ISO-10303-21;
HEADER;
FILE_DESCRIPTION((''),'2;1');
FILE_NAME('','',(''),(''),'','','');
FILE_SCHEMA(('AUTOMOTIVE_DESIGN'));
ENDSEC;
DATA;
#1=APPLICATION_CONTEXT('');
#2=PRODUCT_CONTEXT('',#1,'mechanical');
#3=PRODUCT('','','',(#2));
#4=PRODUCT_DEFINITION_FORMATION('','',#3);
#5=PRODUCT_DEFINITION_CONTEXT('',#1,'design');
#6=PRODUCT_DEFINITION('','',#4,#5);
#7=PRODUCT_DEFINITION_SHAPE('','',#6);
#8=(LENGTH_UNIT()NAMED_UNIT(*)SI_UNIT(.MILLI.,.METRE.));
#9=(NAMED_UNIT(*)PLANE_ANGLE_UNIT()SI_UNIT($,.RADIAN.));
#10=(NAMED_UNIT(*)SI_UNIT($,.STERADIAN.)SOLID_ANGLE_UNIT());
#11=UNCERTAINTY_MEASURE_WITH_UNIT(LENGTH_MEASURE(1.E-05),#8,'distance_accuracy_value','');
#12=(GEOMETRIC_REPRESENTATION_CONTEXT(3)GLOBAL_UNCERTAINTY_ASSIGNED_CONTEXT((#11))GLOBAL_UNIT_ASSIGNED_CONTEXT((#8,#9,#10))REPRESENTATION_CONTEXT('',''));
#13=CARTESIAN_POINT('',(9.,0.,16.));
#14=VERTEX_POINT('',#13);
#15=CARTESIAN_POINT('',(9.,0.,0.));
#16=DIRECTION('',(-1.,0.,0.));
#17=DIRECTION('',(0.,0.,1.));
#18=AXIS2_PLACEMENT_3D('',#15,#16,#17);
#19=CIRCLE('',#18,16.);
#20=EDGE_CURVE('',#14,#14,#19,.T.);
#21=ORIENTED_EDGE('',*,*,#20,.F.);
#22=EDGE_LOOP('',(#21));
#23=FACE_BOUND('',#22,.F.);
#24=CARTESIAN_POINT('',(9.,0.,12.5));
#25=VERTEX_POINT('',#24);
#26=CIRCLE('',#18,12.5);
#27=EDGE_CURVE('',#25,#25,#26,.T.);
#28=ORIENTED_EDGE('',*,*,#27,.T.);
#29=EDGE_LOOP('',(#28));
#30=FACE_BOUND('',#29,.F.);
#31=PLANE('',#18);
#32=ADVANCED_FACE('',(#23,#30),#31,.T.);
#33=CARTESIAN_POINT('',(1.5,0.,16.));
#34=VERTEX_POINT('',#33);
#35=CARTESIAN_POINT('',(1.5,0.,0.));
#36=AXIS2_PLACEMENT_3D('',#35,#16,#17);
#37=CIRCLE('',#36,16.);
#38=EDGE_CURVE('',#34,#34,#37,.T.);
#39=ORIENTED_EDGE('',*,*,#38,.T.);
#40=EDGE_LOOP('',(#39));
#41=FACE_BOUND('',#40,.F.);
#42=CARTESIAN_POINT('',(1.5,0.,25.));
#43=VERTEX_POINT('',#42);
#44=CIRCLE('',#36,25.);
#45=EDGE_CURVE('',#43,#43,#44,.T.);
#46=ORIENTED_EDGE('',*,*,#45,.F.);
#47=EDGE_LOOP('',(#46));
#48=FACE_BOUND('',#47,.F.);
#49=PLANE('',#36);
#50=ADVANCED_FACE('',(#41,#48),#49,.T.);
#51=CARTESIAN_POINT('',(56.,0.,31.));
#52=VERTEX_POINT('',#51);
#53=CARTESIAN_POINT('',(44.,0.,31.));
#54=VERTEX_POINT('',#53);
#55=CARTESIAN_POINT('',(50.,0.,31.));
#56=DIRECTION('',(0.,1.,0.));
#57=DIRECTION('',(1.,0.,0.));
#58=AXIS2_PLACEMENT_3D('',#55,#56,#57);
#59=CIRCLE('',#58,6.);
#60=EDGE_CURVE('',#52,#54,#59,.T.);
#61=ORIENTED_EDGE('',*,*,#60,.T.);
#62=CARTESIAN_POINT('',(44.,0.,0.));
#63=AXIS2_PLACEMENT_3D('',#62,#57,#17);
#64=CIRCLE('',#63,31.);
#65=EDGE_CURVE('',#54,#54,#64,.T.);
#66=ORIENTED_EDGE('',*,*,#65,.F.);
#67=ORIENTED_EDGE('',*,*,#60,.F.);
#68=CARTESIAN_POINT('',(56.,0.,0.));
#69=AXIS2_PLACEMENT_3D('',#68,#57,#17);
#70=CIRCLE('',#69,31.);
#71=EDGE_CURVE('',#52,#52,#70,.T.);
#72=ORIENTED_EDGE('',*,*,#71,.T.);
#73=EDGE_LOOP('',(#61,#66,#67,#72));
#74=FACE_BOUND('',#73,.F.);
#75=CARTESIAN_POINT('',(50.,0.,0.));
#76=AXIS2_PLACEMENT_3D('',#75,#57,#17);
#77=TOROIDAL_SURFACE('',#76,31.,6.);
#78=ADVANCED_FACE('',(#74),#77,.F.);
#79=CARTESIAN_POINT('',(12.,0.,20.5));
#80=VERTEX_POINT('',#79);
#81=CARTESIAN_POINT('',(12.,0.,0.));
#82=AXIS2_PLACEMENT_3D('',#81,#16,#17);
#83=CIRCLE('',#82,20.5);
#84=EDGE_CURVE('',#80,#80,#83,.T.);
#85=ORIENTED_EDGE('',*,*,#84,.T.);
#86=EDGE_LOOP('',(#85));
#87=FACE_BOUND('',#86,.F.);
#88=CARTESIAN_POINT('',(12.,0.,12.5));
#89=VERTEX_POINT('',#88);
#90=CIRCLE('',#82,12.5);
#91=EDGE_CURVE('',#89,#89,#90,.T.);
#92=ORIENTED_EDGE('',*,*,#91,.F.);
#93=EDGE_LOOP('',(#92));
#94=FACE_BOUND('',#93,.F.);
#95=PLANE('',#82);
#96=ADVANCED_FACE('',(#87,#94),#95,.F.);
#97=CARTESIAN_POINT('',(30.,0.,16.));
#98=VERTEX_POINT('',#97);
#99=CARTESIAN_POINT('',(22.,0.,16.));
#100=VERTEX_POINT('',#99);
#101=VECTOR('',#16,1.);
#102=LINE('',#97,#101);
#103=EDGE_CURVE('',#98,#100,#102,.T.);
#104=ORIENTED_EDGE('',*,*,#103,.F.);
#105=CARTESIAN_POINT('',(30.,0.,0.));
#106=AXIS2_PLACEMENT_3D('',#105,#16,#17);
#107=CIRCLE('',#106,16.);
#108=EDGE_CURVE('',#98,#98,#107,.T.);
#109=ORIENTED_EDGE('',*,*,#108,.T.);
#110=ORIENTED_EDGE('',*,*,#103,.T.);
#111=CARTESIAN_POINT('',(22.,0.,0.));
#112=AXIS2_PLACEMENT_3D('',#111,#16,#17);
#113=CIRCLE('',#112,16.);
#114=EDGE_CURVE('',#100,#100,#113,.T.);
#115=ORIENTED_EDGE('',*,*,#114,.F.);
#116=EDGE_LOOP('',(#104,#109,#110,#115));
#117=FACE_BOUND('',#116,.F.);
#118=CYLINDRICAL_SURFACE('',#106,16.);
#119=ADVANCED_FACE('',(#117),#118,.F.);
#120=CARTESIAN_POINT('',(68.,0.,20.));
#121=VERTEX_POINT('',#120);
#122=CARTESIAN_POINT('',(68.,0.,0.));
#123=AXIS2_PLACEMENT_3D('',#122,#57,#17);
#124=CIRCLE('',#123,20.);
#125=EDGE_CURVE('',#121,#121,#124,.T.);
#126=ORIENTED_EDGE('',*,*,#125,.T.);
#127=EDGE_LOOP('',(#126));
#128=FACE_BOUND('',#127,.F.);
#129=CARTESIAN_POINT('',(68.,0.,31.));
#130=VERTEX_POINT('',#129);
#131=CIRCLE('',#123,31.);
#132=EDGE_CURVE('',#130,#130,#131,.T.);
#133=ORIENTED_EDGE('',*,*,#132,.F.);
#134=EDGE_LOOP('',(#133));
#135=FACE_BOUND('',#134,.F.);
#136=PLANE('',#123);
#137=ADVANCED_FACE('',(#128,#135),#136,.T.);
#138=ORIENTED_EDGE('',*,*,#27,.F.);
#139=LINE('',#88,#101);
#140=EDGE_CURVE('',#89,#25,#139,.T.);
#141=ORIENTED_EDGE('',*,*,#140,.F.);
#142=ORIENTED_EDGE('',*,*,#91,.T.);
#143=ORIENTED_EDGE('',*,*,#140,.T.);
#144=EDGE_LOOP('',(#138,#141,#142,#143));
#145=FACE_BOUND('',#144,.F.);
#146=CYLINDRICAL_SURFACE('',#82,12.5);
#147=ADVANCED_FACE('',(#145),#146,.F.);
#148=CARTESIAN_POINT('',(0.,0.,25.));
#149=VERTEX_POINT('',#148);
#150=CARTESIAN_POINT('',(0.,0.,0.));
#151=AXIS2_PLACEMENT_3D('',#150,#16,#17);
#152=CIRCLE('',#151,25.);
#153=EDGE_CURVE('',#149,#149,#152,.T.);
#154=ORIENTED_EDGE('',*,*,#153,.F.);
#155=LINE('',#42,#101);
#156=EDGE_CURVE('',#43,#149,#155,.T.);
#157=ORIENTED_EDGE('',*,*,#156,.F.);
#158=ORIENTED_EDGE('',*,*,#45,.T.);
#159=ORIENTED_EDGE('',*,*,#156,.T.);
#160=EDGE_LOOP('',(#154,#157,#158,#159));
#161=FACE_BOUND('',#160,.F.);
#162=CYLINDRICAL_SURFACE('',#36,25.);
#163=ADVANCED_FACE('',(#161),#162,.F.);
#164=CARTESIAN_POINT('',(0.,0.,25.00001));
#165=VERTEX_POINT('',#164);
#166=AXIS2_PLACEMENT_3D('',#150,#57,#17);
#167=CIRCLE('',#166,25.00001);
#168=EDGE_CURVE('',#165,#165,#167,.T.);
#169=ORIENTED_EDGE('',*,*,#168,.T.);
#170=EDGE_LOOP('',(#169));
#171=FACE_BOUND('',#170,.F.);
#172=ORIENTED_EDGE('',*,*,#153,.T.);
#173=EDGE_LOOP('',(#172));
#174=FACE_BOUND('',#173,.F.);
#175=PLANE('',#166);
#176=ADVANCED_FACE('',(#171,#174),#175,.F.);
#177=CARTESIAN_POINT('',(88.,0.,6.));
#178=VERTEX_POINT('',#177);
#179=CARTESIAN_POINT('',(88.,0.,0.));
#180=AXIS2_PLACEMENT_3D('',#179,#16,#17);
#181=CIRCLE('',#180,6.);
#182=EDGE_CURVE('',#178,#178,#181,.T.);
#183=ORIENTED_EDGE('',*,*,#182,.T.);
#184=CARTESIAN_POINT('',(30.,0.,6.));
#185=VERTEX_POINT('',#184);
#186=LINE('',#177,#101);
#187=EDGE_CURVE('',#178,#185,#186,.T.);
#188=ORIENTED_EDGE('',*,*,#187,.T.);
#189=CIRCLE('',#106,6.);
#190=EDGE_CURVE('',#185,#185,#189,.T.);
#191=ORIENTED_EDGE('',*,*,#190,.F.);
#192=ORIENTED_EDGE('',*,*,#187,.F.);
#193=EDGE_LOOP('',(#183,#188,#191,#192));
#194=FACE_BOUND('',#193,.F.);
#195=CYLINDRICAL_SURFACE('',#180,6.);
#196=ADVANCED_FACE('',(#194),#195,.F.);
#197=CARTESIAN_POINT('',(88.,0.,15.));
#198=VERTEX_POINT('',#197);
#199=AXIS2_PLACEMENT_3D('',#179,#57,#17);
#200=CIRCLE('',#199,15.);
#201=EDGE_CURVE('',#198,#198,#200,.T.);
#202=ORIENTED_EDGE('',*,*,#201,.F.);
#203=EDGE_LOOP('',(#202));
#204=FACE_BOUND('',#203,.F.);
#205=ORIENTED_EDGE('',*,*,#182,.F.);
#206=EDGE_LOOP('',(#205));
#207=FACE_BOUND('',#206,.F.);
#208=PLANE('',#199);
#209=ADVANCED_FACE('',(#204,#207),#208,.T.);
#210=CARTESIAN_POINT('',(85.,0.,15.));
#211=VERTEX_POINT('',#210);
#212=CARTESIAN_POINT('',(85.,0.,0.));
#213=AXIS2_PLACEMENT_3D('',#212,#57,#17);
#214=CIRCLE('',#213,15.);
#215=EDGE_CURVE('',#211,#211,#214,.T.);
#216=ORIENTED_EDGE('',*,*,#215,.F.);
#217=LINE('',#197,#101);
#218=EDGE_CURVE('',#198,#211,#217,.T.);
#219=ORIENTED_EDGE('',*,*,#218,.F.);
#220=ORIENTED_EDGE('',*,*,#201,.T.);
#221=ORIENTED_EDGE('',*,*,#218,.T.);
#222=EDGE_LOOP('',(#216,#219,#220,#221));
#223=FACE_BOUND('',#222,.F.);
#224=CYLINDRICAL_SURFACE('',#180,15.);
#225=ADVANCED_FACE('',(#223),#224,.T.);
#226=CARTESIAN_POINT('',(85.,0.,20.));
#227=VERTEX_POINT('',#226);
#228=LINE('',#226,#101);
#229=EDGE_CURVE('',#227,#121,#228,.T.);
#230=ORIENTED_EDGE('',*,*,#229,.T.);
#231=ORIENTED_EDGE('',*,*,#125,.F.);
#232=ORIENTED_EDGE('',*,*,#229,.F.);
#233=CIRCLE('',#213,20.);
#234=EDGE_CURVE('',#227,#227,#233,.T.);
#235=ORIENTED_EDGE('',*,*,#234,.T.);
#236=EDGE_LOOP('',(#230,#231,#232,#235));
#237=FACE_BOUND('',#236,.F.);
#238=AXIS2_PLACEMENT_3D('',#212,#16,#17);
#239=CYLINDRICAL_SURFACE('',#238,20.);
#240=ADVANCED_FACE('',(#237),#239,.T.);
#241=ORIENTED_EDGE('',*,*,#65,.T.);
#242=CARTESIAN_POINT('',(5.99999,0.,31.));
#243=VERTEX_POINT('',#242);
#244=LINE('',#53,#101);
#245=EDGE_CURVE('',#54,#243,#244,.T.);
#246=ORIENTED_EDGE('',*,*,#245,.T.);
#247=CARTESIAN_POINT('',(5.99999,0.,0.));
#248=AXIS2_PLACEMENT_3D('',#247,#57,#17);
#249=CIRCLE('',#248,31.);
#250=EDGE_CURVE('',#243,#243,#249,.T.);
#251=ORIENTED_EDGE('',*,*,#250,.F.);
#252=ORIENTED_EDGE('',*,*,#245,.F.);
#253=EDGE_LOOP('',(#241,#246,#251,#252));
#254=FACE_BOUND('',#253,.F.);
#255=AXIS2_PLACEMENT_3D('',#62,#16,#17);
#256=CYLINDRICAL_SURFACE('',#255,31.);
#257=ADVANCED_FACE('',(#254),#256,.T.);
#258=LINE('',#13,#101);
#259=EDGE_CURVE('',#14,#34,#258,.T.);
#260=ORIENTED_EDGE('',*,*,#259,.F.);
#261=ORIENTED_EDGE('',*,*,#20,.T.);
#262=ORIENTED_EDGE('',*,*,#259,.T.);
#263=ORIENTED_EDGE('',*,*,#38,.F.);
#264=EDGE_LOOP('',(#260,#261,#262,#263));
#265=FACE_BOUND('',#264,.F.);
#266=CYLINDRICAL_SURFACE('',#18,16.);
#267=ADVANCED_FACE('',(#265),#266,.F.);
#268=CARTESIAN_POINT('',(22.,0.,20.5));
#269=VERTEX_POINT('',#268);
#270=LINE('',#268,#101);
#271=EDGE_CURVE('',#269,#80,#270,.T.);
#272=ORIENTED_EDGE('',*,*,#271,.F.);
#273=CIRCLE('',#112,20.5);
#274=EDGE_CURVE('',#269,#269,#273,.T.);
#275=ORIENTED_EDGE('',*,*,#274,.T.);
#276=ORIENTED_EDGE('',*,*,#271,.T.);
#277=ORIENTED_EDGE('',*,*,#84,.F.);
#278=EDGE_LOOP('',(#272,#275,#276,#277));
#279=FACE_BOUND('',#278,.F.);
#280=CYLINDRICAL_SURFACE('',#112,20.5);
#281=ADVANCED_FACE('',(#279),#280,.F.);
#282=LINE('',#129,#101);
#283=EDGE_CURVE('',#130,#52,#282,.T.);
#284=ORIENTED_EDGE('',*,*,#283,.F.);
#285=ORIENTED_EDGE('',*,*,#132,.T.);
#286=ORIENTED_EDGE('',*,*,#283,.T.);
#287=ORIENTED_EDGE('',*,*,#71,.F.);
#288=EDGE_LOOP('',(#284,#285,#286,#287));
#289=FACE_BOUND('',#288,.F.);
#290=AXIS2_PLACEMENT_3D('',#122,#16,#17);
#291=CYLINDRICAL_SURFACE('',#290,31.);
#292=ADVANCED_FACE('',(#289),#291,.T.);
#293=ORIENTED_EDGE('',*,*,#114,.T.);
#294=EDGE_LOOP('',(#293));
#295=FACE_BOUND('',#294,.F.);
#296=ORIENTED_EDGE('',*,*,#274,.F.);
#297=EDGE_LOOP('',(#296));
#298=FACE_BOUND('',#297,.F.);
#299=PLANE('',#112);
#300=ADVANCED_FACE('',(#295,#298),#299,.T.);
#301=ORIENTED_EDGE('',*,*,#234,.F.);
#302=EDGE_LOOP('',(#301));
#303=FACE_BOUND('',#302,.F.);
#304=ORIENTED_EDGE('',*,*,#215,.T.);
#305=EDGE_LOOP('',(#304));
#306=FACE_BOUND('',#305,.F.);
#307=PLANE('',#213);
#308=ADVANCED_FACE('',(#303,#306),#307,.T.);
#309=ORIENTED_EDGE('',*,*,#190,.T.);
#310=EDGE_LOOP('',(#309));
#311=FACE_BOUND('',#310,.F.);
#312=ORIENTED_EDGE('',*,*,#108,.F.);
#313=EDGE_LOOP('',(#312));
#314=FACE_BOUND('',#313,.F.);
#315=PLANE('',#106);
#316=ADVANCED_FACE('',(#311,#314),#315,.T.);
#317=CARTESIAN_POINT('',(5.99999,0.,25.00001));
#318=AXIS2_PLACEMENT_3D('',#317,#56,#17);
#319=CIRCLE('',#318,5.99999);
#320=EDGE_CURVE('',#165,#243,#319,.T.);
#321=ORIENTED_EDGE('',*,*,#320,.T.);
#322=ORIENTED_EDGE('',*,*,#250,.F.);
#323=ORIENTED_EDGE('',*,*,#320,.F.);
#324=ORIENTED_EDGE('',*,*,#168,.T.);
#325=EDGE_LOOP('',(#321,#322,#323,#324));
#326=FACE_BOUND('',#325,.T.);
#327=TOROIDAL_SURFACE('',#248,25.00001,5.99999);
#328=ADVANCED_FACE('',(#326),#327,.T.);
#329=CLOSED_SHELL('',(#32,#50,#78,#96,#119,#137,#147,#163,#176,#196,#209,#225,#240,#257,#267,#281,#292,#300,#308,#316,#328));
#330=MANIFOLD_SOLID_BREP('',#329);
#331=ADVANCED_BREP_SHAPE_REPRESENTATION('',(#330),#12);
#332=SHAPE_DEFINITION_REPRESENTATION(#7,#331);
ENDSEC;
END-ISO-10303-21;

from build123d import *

# Parameters (mm, degrees)
F4_R = 5.99999


# Not quite as in the source:
# - a fillet or chamfer is up to 0.001 mm smaller than in the source, because OpenCascade refuses the exact size


with BuildPart() as f1:
    # F0 (on Front) → F1 (revolve)
    with BuildSketch(Plane.XZ):
        with BuildLine():
            Line((0, 31), (0, 0))
            Line((0, 0), (88, 0))
            Line((88, 0), (88, 15))
            Line((88, 15), (85, 15))
            Line((85, 15), (85, 20))
            Line((85, 20), (68, 20))
            Line((68, 20), (68, 31))
            Line((68, 31), (56, 31))
            ThreePointArc((56, 31), (50, 25), (44, 31))
            Line((44, 31), (0, 31))
        make_face()
    revolve(axis=Axis((63.3454471827, 0, 0), (1, 0, 0)))

    # F2 (on Front) → F3 (revolve, cut)
    with BuildSketch(Plane.XZ):
        Polygon((0, 25), (0, 0), (88, 0), (88, 6), (30, 6), (30, 16), (22, 16), (22, 20.5), (12, 20.5), (12, 12.5), (9, 12.5), (9, 16), (1.5, 16), (1.5, 25), align=None)
    revolve(axis=Axis((-10.8097042758, 0, 0), (-1, 0, 0)), mode=Mode.SUBTRACT)

    # F4 (radius 6 in the source; OpenCascade refuses exactly that, so slightly less here)
    f4_edges = [f1.edges().sort_by_distance(p)[0] for p in [
        (0, 0, -31),
    ]]
    fillet(f4_edges, radius=F4_R)


solid = f1.part
